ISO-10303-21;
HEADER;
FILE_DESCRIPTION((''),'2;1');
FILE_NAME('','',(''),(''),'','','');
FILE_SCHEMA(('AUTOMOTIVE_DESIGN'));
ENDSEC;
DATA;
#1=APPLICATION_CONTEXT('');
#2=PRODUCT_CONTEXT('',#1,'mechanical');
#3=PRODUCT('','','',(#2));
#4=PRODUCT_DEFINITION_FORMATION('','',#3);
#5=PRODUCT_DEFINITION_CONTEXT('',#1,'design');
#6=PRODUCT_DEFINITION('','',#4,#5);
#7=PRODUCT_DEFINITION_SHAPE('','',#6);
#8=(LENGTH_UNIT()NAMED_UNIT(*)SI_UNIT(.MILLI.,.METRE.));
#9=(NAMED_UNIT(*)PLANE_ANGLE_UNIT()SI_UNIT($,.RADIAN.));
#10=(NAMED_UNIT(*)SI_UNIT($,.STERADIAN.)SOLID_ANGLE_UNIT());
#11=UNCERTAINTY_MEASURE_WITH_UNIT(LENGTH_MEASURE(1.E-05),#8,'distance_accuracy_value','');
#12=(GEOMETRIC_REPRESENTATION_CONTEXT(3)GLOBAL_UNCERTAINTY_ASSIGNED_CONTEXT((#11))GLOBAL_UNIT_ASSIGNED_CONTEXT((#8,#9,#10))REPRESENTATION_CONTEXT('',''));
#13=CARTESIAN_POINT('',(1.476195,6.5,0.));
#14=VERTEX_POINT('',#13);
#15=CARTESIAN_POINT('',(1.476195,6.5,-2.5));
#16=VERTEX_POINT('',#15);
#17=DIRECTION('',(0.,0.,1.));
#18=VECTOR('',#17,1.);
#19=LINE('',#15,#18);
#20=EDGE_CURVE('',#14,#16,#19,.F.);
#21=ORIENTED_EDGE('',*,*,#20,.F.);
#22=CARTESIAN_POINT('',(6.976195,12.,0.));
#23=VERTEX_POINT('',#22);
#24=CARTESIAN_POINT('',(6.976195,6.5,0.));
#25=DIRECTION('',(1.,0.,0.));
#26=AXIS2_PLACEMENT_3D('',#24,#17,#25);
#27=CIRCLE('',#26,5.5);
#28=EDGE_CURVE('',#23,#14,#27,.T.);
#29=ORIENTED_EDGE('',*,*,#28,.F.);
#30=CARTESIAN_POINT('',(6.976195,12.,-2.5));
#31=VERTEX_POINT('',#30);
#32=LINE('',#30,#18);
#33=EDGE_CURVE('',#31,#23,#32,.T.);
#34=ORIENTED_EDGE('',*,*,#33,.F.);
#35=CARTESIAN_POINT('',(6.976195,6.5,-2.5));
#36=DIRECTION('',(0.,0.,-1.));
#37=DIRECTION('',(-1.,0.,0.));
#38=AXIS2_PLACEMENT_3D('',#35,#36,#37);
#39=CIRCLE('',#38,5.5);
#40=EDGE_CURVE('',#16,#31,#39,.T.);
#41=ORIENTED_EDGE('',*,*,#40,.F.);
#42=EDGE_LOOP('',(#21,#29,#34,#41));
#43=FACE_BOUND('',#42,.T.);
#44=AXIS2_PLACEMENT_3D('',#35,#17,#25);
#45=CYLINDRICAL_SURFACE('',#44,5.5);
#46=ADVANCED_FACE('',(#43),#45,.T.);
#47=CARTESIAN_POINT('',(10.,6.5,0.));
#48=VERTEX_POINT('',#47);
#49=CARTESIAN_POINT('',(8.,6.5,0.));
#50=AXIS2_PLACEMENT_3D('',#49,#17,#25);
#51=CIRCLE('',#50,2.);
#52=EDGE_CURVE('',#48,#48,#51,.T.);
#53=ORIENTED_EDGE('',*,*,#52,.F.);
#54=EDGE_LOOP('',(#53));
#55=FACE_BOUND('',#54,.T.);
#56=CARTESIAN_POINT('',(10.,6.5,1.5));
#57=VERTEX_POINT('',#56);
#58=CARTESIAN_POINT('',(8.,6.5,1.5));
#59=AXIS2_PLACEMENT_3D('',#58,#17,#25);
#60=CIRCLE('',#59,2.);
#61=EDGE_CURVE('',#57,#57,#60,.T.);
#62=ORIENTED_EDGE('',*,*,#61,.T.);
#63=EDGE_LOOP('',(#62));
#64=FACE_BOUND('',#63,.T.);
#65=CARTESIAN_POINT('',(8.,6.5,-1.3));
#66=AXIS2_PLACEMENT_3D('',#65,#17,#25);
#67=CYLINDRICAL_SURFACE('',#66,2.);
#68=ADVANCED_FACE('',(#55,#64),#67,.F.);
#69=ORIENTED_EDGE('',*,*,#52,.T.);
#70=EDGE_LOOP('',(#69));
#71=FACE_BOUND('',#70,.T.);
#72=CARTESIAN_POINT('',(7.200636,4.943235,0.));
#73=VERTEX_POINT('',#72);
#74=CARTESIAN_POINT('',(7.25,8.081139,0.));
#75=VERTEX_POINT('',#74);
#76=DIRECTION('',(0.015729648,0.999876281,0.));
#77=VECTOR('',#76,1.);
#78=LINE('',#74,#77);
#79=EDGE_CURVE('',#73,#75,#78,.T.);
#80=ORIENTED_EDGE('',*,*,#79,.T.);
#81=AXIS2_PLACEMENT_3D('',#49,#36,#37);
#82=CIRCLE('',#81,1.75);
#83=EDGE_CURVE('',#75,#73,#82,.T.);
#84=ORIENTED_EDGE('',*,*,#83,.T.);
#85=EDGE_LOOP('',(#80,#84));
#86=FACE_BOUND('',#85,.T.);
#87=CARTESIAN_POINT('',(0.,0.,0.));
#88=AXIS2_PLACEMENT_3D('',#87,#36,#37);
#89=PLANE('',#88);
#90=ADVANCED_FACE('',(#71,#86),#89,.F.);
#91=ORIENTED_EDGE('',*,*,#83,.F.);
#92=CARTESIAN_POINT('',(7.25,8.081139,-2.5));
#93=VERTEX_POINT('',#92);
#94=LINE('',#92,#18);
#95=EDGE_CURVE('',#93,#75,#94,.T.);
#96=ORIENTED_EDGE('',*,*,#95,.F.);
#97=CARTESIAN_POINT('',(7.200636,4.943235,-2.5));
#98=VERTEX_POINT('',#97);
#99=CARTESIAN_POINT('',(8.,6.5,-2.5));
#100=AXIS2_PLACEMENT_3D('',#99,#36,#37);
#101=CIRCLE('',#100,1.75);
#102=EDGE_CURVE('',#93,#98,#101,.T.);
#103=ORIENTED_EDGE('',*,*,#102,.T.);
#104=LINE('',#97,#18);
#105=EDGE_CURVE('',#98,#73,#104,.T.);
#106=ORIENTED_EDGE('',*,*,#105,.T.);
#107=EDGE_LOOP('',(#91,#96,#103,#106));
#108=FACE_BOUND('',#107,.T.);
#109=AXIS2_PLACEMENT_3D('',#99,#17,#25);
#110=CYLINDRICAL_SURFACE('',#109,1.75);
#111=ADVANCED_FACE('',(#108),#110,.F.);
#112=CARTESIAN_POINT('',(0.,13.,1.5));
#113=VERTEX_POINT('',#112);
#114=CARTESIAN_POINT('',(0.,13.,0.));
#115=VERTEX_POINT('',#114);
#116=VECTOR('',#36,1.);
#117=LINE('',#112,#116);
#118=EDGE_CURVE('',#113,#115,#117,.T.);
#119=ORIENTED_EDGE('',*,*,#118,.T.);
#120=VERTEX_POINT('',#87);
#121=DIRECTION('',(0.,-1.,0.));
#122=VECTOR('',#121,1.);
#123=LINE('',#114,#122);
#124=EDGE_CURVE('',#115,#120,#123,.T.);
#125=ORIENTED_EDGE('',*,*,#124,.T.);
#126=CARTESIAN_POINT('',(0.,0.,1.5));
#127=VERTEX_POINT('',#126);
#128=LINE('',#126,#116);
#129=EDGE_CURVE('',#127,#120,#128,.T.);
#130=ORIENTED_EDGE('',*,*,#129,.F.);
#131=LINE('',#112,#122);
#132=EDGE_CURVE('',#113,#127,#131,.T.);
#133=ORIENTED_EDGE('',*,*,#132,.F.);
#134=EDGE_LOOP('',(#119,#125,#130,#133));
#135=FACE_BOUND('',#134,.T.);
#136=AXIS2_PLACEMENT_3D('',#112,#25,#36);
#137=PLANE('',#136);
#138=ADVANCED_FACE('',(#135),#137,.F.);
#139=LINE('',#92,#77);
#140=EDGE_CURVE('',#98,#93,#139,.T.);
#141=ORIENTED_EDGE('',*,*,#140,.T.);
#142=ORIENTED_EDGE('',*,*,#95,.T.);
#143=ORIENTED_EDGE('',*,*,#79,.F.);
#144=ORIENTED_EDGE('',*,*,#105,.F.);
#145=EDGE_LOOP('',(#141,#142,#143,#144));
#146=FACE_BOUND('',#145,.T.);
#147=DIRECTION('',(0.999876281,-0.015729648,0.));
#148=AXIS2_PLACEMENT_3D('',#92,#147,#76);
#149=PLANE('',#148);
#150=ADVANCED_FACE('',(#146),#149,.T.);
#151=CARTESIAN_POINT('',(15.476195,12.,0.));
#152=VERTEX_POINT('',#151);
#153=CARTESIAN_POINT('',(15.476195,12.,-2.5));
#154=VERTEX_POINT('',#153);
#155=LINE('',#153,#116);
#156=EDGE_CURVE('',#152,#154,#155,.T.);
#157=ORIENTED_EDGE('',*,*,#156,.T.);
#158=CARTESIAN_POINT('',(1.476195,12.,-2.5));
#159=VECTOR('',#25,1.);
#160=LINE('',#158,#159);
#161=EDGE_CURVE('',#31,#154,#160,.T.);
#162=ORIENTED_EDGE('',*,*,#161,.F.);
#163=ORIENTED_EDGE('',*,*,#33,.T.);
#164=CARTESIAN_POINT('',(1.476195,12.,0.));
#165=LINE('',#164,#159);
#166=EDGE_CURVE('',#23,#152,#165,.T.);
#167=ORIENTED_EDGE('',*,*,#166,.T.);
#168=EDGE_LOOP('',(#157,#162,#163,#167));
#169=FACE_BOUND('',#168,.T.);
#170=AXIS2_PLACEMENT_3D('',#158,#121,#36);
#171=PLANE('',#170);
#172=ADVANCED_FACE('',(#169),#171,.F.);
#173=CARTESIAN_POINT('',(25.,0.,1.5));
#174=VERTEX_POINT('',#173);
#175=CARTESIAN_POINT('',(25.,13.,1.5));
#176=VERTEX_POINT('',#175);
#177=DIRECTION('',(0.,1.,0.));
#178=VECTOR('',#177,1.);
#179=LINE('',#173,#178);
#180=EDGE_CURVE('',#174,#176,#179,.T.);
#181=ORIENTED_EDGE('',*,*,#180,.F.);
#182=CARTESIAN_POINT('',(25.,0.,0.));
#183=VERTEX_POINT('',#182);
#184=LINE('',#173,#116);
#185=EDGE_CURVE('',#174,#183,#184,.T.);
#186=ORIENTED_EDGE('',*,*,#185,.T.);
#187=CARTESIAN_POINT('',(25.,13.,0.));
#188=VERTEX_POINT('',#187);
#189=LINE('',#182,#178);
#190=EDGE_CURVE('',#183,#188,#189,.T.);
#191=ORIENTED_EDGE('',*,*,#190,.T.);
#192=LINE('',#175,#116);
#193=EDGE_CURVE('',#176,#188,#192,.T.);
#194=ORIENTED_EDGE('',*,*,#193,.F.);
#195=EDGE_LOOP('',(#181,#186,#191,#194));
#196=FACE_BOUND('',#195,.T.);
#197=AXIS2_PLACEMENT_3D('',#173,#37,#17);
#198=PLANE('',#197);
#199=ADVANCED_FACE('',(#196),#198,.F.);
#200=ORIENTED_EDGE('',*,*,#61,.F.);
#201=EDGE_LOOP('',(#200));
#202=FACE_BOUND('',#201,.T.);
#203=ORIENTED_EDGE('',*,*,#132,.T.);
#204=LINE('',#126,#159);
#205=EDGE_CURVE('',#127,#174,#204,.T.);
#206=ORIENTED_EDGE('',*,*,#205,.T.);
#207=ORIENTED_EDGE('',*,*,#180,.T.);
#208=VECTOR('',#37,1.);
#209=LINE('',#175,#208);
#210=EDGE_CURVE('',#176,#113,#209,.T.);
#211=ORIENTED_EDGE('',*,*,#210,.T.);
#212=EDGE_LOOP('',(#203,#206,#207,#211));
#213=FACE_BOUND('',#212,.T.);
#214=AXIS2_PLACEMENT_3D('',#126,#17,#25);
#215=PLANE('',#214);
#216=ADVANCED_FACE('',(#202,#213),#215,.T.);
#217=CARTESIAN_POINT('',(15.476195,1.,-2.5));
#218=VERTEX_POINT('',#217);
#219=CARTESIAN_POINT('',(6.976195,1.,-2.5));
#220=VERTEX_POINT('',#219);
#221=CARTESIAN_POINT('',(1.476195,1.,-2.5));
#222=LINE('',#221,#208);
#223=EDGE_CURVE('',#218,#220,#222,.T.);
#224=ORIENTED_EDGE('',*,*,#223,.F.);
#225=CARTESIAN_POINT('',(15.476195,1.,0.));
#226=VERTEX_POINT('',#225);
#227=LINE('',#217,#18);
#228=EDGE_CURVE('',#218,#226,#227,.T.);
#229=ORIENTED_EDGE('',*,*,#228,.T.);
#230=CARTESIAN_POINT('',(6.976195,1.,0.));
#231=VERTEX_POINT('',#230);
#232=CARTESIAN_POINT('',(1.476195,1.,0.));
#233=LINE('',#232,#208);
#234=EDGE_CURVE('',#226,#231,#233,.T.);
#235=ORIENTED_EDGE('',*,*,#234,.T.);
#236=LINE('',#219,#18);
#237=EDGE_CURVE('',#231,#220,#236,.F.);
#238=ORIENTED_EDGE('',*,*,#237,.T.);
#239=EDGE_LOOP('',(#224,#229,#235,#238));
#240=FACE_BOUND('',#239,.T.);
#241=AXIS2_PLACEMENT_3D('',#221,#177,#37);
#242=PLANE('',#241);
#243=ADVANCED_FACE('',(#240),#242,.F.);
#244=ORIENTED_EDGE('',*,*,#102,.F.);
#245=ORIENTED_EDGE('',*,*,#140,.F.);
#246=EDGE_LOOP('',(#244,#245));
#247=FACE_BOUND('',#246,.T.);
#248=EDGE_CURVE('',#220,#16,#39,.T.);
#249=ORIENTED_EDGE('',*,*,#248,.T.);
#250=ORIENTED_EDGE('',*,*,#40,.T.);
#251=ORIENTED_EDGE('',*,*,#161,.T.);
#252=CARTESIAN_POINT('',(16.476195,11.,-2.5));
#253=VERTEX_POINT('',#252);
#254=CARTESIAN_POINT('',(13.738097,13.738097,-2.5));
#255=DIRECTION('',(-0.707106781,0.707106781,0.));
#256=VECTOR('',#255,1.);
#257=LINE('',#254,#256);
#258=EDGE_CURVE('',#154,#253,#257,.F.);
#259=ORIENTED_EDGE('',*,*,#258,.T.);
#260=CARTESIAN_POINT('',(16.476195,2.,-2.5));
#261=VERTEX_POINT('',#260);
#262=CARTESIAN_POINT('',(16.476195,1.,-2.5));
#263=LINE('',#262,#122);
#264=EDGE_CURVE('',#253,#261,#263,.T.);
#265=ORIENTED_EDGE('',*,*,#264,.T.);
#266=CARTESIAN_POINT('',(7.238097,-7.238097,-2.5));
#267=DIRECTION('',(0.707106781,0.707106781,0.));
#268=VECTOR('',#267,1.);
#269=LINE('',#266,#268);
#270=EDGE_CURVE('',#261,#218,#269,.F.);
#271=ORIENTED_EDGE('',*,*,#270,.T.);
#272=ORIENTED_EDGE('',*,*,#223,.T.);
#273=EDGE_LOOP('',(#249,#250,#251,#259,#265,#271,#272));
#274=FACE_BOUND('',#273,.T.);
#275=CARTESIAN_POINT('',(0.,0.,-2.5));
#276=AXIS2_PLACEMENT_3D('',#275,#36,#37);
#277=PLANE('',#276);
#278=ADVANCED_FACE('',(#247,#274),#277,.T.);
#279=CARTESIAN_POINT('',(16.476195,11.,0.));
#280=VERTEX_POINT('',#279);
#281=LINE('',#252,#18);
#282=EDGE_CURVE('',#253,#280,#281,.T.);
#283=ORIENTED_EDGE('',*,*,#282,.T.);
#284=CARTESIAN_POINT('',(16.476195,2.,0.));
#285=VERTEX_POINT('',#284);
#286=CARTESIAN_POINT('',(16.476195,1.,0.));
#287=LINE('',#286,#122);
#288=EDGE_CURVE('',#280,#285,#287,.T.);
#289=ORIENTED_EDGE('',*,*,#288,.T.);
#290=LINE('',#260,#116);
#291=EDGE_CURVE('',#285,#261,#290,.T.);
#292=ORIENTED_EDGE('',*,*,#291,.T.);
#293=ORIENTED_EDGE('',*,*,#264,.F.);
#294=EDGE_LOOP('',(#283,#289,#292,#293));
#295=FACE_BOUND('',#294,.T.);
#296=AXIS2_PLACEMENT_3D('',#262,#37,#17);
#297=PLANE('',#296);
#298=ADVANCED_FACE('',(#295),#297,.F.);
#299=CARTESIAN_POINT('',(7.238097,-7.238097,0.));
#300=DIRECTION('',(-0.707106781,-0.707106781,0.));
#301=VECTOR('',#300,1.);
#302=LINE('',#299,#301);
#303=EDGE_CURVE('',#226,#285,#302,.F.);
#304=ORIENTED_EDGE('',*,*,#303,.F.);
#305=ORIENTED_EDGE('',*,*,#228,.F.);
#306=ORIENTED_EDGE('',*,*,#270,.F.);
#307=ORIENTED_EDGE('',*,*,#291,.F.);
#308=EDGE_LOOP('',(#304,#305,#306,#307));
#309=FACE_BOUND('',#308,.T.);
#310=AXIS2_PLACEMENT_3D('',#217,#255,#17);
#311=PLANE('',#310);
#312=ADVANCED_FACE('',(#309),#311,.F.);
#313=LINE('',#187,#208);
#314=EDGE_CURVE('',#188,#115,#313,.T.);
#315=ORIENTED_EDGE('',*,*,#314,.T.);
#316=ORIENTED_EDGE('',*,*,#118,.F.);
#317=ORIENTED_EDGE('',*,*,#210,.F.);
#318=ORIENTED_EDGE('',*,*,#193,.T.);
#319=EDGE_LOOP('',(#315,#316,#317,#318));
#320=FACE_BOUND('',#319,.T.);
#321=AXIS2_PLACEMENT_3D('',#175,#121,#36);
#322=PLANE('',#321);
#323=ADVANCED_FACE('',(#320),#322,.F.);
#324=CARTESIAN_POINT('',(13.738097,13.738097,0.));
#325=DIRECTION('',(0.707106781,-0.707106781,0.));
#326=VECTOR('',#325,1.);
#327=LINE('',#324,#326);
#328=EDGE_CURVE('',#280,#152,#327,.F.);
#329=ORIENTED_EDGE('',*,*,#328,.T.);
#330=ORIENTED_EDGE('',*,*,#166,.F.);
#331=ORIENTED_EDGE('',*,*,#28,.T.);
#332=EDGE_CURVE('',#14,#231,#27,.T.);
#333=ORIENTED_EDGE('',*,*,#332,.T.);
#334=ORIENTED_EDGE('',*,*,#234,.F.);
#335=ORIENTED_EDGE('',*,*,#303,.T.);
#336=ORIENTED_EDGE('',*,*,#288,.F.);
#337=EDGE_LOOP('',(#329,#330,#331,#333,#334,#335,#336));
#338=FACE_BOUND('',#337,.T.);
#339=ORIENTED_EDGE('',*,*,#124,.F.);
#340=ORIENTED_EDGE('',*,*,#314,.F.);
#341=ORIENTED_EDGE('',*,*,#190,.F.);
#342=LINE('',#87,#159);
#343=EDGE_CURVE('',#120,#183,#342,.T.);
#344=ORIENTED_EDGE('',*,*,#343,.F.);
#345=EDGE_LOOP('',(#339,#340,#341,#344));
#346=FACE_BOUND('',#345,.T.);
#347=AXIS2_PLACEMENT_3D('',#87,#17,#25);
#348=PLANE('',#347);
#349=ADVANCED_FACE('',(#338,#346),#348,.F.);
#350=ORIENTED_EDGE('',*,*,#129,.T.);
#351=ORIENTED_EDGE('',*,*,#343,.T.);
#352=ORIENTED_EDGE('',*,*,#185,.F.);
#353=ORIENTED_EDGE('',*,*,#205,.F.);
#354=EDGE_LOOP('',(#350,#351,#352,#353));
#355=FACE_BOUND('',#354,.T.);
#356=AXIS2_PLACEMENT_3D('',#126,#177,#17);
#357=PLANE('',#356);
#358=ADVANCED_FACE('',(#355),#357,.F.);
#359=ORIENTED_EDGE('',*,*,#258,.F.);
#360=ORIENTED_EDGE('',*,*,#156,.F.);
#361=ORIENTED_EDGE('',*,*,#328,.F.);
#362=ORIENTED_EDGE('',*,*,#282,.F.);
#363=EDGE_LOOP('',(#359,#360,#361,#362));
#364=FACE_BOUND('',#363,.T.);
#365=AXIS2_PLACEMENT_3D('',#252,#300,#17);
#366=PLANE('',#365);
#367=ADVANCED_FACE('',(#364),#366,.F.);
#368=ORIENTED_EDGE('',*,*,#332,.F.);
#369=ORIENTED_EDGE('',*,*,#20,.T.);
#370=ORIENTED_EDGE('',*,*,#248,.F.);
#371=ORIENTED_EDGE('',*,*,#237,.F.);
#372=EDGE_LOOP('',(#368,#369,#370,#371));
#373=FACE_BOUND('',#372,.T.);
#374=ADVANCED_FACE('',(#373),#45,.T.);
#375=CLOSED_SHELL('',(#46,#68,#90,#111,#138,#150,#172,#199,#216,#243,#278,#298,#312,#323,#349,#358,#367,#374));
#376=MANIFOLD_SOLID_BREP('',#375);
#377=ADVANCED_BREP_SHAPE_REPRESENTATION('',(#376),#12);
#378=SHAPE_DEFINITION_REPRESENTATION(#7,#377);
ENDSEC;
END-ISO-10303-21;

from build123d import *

# Parameters (mm, degrees)
SKETCH_1_W          = 25
SKETCH_1_H          = 13
EXTRUDE_1_DEPTH     = 1.5
SKETCH_2_R          = 2
CUT_EXTRUDE_1_DEPTH = 2.8
SKETCH_3_W          = 15
SKETCH_3_H          = 11
EXTRUDE_2_DEPTH     = 2.5
FILLET_1_R          = 5.5
CHAMFER_1_SIZE      = 1


with BuildPart() as part:
    # 草图1 → 凸台-拉伸1 (new body)
    with BuildSketch(Plane.XY):
        with Locations((12.5, 6.5)):
            Rectangle(SKETCH_1_W, SKETCH_1_H)
    extrude(amount=EXTRUDE_1_DEPTH)

    # 草图2 → 切除-拉伸1 (cut)
    with BuildSketch(Plane.XY.offset(1.5)):
        with Locations((8, 6.5)):
            Circle(SKETCH_2_R)
    extrude(amount=-CUT_EXTRUDE_1_DEPTH, mode=Mode.SUBTRACT)

    # 草图3 → 凸台-拉伸2 (add)
    with BuildSketch(Plane(origin=(0, 0, 0), x_dir=(-1, 0, 0), z_dir=(0, 0, -1))):
        with Locations((-8.976194502, 6.5)):
            Rectangle(SKETCH_3_W, SKETCH_3_H)
        with BuildLine():
            Line((-7.25, 8.08113883), (-7.200635773, 4.943235139))
            ThreePointArc((-7.200635773, 4.943235139), (-9.749783493, 6.472473116), (-7.25, 8.08113883))
        make_face(mode=Mode.SUBTRACT)
    extrude(amount=EXTRUDE_2_DEPTH)

    # 圆角1
    fillet_1_edges = [part.edges().sort_by_distance(p)[0] for p in [
        (1.476194502, 1, -1.25),
        (1.476194502, 12, -1.25),
    ]]
    fillet(fillet_1_edges, radius=FILLET_1_R - 0.0001)  # a hair under: the kernel refuses the full size

    # 倒角1
    chamfer_1_edges = [part.edges().sort_by_distance(p)[0] for p in [
        (16.476194502, 12, -1.25),
        (16.476194502, 1, -1.25),
    ]]
    chamfer(chamfer_1_edges, length=CHAMFER_1_SIZE)


solid = part.part
